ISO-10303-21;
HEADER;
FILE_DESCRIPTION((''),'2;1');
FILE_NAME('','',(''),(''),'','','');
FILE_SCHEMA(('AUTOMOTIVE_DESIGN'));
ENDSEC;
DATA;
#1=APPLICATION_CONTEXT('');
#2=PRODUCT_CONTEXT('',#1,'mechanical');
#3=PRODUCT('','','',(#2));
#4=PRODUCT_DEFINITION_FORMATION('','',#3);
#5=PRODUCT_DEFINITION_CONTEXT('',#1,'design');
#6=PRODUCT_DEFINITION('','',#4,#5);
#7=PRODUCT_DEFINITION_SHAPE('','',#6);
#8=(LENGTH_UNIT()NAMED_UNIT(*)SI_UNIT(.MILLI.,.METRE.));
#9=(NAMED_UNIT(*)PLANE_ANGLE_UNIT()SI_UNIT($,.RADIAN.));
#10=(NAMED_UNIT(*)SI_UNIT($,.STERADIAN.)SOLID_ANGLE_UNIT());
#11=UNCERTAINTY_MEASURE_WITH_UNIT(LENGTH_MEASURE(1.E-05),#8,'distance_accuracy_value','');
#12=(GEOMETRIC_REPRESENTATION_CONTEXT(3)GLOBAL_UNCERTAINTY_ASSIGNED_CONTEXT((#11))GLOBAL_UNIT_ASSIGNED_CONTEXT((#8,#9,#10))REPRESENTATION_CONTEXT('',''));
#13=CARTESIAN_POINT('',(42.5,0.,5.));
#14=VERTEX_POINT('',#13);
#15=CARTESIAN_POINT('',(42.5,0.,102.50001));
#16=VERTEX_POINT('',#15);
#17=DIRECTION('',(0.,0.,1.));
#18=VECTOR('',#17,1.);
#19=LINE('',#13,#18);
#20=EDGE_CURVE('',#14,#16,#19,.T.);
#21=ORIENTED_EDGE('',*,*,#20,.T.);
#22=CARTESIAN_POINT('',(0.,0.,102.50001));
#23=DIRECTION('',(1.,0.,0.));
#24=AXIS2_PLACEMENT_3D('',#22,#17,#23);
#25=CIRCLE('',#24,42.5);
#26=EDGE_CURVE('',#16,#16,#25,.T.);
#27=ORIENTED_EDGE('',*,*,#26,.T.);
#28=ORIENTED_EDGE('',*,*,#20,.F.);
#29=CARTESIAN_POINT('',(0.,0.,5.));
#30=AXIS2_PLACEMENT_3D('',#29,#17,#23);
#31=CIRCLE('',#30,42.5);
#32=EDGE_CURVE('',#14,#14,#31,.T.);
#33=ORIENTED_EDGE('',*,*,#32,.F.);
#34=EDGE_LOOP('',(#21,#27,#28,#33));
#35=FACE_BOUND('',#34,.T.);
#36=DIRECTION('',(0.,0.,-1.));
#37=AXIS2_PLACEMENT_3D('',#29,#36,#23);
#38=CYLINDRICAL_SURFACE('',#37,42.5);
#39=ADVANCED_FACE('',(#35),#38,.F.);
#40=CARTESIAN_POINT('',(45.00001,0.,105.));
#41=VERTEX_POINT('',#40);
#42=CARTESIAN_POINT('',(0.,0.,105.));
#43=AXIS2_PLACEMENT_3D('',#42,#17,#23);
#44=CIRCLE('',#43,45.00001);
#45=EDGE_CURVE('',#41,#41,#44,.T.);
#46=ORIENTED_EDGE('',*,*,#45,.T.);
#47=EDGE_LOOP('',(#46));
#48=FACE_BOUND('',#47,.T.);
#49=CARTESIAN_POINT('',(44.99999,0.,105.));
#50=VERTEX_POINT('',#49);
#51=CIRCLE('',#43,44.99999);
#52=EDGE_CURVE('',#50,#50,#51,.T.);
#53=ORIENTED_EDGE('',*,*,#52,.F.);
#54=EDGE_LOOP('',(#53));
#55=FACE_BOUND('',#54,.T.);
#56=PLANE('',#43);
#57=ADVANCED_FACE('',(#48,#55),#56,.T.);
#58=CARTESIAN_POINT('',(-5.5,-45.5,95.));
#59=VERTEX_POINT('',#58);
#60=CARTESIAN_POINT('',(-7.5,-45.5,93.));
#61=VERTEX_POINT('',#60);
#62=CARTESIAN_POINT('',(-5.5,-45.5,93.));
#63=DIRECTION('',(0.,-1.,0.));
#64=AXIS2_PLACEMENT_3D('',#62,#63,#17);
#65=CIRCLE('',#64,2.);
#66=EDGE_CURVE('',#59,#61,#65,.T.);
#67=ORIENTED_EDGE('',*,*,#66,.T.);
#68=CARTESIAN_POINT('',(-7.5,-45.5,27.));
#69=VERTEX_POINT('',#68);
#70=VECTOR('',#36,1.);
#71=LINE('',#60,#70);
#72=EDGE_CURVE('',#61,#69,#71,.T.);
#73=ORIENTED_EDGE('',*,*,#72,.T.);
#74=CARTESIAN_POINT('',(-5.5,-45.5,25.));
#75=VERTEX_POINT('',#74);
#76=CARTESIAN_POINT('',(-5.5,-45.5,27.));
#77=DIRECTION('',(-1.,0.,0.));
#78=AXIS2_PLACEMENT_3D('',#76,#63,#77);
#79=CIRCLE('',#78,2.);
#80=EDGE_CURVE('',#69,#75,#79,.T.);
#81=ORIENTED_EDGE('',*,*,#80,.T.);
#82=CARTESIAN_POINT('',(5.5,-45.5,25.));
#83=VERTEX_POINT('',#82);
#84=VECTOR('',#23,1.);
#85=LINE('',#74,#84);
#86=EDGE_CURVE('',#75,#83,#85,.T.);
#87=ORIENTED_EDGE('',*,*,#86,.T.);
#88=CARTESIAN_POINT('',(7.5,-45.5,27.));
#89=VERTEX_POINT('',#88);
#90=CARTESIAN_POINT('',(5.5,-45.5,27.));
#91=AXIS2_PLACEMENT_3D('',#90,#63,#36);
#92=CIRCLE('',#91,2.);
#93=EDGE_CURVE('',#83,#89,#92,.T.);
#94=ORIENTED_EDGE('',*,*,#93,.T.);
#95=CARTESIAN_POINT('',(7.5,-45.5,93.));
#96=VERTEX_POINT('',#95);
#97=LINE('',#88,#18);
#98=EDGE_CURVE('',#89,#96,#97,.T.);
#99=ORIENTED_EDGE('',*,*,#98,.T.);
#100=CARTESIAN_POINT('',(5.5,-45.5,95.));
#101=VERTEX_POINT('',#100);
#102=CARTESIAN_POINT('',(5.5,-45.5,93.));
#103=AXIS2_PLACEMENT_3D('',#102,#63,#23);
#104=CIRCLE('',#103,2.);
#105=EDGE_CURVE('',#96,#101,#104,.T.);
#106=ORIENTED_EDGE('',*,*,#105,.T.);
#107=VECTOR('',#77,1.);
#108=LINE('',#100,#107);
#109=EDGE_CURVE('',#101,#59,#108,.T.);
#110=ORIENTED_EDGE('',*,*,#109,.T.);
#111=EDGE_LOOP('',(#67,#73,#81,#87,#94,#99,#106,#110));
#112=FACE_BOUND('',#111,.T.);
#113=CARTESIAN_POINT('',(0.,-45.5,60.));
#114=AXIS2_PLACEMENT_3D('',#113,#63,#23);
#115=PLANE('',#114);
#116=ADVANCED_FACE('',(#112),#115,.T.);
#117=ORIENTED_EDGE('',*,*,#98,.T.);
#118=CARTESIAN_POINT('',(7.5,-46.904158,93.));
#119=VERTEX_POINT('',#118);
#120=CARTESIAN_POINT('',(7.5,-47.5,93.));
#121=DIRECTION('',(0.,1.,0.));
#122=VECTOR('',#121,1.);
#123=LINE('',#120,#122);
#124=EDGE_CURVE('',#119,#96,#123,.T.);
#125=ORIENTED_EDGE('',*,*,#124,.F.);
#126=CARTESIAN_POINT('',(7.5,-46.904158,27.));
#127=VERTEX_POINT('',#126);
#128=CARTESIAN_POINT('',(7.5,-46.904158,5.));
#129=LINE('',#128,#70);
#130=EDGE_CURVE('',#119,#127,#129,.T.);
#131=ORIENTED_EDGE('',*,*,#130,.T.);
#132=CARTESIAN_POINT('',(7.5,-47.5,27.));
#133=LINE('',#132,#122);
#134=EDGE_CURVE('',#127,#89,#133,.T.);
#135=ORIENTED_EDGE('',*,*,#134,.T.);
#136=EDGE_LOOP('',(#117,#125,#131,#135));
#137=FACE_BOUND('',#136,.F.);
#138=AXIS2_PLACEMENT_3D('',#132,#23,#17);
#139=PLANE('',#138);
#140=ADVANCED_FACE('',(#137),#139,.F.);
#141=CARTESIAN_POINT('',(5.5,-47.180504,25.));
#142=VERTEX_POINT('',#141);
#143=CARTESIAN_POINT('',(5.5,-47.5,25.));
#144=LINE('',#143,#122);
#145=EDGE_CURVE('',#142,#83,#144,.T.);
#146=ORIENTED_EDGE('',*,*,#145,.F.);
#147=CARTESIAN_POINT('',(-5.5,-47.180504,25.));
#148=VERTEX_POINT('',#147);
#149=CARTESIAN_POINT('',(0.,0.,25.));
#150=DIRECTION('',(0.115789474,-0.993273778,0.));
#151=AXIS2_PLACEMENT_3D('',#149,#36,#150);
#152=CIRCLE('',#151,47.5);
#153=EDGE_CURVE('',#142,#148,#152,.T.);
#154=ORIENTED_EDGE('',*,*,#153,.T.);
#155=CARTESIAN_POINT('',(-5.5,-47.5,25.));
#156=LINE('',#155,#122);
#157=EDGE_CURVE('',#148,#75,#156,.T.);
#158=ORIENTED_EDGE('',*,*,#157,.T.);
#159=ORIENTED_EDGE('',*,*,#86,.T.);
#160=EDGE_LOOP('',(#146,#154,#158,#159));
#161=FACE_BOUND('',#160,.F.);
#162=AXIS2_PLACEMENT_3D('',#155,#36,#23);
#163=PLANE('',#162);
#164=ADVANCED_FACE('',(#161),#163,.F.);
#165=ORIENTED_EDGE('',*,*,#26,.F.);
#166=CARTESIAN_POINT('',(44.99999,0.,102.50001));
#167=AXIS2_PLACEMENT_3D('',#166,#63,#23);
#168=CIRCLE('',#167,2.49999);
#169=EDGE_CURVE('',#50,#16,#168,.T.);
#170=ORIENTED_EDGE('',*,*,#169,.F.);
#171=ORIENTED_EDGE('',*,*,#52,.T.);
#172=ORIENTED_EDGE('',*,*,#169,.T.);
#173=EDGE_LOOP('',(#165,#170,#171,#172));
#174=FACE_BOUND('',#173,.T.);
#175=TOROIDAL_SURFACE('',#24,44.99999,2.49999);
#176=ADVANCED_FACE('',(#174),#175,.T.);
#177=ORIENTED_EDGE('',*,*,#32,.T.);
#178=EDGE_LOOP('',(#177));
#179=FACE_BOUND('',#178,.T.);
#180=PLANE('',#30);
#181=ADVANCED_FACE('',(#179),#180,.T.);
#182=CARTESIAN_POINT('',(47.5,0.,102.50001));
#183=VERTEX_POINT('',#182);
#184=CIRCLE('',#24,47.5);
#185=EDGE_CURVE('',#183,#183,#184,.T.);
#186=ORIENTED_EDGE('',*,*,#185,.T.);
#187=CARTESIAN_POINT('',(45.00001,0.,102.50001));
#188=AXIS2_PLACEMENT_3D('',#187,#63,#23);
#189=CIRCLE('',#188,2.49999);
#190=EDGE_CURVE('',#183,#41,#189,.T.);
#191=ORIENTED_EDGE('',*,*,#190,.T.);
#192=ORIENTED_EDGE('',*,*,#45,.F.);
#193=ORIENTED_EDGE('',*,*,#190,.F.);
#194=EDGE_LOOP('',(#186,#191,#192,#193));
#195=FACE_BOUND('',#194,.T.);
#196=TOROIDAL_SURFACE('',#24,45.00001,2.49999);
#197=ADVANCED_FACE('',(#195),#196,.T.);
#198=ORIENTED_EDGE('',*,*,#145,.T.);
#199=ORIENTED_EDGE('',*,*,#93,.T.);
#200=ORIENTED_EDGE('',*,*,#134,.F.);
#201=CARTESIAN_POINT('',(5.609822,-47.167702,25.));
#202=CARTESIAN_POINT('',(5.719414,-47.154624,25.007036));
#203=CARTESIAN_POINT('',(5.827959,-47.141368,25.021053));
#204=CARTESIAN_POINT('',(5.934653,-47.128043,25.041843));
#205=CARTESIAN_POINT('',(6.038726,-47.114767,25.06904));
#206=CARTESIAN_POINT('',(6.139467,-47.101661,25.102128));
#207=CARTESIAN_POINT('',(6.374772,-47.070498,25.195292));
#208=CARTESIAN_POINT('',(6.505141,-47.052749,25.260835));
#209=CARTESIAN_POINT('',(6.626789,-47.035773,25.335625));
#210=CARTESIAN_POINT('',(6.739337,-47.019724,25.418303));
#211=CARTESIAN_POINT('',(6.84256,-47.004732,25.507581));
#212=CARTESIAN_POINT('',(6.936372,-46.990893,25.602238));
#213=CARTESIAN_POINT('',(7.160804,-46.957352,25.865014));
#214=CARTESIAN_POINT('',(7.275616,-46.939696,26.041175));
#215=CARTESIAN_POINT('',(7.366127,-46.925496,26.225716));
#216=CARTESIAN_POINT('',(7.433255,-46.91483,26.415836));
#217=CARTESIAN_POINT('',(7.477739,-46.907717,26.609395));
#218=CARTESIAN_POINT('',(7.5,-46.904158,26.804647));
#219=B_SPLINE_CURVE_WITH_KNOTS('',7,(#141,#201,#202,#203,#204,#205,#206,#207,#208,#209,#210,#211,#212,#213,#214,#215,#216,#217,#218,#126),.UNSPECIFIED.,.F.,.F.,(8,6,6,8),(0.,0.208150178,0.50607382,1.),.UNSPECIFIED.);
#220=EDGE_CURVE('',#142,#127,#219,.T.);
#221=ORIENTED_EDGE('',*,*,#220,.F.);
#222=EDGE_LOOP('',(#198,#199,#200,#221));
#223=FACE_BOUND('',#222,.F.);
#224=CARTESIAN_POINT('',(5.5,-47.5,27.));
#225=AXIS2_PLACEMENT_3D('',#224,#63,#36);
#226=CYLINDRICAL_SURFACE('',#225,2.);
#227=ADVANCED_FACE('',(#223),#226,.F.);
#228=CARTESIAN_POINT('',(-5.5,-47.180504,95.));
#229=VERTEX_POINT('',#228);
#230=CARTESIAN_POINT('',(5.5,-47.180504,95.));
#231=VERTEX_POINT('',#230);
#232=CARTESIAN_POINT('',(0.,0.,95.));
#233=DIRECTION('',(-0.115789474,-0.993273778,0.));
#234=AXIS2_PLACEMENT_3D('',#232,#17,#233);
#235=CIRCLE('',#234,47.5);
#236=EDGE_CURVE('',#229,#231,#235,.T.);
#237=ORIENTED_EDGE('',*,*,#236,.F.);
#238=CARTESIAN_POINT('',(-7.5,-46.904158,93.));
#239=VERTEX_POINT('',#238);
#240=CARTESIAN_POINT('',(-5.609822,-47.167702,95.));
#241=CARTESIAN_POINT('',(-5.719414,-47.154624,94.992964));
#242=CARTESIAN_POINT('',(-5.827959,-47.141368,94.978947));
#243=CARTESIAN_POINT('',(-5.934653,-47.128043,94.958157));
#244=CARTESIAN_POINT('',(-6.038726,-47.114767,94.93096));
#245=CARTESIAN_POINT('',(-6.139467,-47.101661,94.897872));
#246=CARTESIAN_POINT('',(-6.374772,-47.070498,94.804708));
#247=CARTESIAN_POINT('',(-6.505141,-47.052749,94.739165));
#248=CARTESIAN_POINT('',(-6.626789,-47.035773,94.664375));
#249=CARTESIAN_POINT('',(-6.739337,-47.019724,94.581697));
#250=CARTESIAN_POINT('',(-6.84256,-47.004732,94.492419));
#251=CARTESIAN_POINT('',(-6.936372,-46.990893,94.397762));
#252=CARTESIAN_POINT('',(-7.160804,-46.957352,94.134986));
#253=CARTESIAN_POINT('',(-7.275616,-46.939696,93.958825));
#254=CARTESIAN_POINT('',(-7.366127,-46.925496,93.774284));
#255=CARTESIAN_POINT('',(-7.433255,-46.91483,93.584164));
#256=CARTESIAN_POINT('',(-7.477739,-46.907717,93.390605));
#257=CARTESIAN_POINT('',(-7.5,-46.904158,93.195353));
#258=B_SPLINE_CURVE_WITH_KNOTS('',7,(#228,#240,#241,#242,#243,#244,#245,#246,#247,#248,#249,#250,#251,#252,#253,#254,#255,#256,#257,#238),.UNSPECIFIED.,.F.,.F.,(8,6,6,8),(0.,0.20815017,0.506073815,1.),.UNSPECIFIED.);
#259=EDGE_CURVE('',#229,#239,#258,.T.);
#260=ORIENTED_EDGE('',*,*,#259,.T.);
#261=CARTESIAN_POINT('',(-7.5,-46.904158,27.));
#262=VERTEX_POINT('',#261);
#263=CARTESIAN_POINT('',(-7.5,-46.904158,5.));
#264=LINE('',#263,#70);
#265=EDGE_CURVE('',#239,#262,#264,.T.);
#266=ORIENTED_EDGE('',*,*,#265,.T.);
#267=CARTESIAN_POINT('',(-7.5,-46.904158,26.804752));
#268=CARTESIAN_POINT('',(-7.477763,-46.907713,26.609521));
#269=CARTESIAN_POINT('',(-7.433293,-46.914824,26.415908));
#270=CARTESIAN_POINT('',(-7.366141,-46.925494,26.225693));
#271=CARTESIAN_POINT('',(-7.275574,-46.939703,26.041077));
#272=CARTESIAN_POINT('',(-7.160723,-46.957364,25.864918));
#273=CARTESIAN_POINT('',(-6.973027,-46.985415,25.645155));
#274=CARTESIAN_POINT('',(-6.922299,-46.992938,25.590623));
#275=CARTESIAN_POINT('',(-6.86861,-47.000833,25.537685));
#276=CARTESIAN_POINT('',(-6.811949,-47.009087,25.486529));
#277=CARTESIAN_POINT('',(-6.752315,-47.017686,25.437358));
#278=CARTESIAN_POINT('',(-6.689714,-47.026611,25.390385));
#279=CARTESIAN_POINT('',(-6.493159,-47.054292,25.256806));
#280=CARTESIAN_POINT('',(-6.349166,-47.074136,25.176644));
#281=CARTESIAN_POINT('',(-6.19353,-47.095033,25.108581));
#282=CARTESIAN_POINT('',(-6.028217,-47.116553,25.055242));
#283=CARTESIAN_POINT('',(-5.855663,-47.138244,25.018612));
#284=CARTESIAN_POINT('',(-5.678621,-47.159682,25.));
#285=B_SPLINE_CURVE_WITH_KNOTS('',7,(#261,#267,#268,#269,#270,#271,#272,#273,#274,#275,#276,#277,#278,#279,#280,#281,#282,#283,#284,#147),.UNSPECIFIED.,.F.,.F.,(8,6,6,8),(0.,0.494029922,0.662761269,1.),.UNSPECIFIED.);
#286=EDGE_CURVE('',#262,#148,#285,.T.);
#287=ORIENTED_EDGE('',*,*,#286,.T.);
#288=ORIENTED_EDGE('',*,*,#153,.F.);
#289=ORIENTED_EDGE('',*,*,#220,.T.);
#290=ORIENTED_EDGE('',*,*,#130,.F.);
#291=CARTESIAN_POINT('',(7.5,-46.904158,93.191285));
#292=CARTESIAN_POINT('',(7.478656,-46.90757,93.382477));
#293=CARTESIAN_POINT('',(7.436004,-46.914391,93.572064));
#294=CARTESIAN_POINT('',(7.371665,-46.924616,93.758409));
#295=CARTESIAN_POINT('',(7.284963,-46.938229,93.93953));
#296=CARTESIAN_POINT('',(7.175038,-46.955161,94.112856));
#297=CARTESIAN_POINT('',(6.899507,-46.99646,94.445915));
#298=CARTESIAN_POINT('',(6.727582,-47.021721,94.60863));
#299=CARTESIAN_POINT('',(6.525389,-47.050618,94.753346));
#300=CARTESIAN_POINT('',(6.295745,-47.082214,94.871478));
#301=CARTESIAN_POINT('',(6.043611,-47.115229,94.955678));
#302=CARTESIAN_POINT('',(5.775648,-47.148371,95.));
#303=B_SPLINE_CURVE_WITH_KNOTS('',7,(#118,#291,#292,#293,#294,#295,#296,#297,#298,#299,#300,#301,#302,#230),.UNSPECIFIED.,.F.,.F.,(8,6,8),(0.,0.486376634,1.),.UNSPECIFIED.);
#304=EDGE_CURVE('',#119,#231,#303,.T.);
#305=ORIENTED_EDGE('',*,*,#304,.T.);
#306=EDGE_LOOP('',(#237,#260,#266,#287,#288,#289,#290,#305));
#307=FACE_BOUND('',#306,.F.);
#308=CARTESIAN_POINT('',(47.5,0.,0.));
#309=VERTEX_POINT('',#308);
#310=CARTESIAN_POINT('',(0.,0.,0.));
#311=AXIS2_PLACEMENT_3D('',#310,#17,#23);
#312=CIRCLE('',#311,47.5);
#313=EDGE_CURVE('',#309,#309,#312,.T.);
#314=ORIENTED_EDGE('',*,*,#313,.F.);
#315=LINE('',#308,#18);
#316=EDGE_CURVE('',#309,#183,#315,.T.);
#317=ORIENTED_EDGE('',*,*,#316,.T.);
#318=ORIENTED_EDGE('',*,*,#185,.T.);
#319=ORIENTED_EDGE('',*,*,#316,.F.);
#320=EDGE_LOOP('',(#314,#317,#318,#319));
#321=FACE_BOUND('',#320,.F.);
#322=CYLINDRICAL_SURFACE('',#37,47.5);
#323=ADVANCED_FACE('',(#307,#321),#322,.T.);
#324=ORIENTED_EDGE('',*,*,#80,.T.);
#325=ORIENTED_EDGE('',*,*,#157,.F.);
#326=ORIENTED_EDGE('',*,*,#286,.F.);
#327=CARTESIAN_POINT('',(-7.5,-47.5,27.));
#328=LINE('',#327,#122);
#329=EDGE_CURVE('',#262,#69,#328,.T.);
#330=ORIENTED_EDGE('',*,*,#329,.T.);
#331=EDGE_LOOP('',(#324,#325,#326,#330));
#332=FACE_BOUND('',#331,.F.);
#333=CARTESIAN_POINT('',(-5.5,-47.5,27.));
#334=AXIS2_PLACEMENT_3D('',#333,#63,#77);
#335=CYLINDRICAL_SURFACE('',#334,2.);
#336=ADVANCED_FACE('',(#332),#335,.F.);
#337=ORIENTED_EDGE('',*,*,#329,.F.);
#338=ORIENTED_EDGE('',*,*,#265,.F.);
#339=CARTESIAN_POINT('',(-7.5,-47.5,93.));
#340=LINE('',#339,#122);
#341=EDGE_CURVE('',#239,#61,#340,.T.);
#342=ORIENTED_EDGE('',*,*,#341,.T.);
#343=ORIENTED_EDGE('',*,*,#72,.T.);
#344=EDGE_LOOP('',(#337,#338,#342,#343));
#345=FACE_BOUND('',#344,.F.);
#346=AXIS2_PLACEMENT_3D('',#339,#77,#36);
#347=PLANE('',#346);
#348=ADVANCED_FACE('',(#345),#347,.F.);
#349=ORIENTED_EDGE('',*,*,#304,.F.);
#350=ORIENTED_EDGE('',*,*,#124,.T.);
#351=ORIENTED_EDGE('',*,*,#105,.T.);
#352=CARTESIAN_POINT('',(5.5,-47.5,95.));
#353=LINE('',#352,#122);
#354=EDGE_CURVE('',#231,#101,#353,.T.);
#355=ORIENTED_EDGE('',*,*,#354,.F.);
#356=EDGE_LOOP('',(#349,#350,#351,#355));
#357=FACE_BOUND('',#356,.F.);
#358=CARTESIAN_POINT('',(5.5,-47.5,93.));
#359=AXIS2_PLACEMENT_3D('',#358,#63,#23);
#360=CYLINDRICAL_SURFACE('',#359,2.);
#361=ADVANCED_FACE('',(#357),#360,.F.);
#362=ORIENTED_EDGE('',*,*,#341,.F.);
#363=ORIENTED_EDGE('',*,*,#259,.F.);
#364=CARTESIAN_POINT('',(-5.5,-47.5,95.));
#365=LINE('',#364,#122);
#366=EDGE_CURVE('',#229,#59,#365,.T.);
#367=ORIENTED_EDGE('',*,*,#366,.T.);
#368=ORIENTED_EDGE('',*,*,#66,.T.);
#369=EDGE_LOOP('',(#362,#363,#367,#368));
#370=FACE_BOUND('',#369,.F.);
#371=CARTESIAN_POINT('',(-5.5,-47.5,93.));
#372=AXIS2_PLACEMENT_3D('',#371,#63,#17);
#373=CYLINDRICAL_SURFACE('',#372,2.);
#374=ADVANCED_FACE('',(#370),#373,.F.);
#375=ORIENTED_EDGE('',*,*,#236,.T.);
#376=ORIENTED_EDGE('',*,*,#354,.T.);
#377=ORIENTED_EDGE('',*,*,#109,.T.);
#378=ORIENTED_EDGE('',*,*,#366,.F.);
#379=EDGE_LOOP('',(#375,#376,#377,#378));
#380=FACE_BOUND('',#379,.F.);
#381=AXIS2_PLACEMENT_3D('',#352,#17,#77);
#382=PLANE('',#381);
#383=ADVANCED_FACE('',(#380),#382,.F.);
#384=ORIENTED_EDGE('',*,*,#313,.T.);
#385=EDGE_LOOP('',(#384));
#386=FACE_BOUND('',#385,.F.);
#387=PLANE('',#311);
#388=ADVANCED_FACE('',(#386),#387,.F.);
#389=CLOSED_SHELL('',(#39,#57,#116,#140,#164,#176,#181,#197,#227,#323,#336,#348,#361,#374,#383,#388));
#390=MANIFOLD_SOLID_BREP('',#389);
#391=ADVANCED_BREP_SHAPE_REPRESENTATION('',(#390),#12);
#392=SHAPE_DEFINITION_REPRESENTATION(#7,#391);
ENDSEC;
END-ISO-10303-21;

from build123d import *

# Parameters (mm, degrees)
F0_R     = 47.5
F1_DEPTH = 5
F2_R     = 47.5
F2_R_2   = 42.5
F3_DEPTH = 100
F6_DEPTH = 2
F8_R     = 2.49999


# Not quite as in the source:
# - a fillet or chamfer is up to 0.001 mm smaller than in the source, because OpenCascade refuses the exact size


with BuildPart() as f1:
    # F0 (on Top) → F1 (new body)
    with BuildSketch(Plane.XY):
        Circle(F0_R)
    extrude(amount=F1_DEPTH)

    # F2 (on face) → F3 (join)
    with BuildSketch(Plane.XY.offset(5)):
        Circle(F2_R)
        Circle(F2_R_2, mode=Mode.SUBTRACT)
    extrude(amount=F3_DEPTH)

    # F5 (on offset) → F6 (cut)
    with BuildSketch(Plane.XZ.offset(47.5)):
        with BuildLine():
            ThreePointArc((7.5, 93), (6.9142135624, 94.4142135624), (5.5, 95))
            Line((5.5, 95), (-5.5, 95))
            ThreePointArc((-5.5, 95), (-6.9142135624, 94.4142135624), (-7.5, 93))
            Line((-7.5, 93), (-7.5, 27))
            ThreePointArc((-7.5, 27), (-6.9142135624, 25.5857864376), (-5.5, 25))
            Line((-5.5, 25), (5.5, 25))
            ThreePointArc((5.5, 25), (6.9142135624, 25.5857864376), (7.5, 27))
            Line((7.5, 27), (7.5, 93))
        make_face()
    extrude(amount=-F6_DEPTH, mode=Mode.SUBTRACT)

    # F8 (radius 2.5 in the source; OpenCascade refuses exactly that, so slightly less here)
    f8_edges = [f1.edges().sort_by_distance(p)[0] for p in [
        (-47.5, 0, 105),
        (-42.5, 0, 105),
    ]]
    fillet(f8_edges, radius=F8_R)


solid = f1.part
